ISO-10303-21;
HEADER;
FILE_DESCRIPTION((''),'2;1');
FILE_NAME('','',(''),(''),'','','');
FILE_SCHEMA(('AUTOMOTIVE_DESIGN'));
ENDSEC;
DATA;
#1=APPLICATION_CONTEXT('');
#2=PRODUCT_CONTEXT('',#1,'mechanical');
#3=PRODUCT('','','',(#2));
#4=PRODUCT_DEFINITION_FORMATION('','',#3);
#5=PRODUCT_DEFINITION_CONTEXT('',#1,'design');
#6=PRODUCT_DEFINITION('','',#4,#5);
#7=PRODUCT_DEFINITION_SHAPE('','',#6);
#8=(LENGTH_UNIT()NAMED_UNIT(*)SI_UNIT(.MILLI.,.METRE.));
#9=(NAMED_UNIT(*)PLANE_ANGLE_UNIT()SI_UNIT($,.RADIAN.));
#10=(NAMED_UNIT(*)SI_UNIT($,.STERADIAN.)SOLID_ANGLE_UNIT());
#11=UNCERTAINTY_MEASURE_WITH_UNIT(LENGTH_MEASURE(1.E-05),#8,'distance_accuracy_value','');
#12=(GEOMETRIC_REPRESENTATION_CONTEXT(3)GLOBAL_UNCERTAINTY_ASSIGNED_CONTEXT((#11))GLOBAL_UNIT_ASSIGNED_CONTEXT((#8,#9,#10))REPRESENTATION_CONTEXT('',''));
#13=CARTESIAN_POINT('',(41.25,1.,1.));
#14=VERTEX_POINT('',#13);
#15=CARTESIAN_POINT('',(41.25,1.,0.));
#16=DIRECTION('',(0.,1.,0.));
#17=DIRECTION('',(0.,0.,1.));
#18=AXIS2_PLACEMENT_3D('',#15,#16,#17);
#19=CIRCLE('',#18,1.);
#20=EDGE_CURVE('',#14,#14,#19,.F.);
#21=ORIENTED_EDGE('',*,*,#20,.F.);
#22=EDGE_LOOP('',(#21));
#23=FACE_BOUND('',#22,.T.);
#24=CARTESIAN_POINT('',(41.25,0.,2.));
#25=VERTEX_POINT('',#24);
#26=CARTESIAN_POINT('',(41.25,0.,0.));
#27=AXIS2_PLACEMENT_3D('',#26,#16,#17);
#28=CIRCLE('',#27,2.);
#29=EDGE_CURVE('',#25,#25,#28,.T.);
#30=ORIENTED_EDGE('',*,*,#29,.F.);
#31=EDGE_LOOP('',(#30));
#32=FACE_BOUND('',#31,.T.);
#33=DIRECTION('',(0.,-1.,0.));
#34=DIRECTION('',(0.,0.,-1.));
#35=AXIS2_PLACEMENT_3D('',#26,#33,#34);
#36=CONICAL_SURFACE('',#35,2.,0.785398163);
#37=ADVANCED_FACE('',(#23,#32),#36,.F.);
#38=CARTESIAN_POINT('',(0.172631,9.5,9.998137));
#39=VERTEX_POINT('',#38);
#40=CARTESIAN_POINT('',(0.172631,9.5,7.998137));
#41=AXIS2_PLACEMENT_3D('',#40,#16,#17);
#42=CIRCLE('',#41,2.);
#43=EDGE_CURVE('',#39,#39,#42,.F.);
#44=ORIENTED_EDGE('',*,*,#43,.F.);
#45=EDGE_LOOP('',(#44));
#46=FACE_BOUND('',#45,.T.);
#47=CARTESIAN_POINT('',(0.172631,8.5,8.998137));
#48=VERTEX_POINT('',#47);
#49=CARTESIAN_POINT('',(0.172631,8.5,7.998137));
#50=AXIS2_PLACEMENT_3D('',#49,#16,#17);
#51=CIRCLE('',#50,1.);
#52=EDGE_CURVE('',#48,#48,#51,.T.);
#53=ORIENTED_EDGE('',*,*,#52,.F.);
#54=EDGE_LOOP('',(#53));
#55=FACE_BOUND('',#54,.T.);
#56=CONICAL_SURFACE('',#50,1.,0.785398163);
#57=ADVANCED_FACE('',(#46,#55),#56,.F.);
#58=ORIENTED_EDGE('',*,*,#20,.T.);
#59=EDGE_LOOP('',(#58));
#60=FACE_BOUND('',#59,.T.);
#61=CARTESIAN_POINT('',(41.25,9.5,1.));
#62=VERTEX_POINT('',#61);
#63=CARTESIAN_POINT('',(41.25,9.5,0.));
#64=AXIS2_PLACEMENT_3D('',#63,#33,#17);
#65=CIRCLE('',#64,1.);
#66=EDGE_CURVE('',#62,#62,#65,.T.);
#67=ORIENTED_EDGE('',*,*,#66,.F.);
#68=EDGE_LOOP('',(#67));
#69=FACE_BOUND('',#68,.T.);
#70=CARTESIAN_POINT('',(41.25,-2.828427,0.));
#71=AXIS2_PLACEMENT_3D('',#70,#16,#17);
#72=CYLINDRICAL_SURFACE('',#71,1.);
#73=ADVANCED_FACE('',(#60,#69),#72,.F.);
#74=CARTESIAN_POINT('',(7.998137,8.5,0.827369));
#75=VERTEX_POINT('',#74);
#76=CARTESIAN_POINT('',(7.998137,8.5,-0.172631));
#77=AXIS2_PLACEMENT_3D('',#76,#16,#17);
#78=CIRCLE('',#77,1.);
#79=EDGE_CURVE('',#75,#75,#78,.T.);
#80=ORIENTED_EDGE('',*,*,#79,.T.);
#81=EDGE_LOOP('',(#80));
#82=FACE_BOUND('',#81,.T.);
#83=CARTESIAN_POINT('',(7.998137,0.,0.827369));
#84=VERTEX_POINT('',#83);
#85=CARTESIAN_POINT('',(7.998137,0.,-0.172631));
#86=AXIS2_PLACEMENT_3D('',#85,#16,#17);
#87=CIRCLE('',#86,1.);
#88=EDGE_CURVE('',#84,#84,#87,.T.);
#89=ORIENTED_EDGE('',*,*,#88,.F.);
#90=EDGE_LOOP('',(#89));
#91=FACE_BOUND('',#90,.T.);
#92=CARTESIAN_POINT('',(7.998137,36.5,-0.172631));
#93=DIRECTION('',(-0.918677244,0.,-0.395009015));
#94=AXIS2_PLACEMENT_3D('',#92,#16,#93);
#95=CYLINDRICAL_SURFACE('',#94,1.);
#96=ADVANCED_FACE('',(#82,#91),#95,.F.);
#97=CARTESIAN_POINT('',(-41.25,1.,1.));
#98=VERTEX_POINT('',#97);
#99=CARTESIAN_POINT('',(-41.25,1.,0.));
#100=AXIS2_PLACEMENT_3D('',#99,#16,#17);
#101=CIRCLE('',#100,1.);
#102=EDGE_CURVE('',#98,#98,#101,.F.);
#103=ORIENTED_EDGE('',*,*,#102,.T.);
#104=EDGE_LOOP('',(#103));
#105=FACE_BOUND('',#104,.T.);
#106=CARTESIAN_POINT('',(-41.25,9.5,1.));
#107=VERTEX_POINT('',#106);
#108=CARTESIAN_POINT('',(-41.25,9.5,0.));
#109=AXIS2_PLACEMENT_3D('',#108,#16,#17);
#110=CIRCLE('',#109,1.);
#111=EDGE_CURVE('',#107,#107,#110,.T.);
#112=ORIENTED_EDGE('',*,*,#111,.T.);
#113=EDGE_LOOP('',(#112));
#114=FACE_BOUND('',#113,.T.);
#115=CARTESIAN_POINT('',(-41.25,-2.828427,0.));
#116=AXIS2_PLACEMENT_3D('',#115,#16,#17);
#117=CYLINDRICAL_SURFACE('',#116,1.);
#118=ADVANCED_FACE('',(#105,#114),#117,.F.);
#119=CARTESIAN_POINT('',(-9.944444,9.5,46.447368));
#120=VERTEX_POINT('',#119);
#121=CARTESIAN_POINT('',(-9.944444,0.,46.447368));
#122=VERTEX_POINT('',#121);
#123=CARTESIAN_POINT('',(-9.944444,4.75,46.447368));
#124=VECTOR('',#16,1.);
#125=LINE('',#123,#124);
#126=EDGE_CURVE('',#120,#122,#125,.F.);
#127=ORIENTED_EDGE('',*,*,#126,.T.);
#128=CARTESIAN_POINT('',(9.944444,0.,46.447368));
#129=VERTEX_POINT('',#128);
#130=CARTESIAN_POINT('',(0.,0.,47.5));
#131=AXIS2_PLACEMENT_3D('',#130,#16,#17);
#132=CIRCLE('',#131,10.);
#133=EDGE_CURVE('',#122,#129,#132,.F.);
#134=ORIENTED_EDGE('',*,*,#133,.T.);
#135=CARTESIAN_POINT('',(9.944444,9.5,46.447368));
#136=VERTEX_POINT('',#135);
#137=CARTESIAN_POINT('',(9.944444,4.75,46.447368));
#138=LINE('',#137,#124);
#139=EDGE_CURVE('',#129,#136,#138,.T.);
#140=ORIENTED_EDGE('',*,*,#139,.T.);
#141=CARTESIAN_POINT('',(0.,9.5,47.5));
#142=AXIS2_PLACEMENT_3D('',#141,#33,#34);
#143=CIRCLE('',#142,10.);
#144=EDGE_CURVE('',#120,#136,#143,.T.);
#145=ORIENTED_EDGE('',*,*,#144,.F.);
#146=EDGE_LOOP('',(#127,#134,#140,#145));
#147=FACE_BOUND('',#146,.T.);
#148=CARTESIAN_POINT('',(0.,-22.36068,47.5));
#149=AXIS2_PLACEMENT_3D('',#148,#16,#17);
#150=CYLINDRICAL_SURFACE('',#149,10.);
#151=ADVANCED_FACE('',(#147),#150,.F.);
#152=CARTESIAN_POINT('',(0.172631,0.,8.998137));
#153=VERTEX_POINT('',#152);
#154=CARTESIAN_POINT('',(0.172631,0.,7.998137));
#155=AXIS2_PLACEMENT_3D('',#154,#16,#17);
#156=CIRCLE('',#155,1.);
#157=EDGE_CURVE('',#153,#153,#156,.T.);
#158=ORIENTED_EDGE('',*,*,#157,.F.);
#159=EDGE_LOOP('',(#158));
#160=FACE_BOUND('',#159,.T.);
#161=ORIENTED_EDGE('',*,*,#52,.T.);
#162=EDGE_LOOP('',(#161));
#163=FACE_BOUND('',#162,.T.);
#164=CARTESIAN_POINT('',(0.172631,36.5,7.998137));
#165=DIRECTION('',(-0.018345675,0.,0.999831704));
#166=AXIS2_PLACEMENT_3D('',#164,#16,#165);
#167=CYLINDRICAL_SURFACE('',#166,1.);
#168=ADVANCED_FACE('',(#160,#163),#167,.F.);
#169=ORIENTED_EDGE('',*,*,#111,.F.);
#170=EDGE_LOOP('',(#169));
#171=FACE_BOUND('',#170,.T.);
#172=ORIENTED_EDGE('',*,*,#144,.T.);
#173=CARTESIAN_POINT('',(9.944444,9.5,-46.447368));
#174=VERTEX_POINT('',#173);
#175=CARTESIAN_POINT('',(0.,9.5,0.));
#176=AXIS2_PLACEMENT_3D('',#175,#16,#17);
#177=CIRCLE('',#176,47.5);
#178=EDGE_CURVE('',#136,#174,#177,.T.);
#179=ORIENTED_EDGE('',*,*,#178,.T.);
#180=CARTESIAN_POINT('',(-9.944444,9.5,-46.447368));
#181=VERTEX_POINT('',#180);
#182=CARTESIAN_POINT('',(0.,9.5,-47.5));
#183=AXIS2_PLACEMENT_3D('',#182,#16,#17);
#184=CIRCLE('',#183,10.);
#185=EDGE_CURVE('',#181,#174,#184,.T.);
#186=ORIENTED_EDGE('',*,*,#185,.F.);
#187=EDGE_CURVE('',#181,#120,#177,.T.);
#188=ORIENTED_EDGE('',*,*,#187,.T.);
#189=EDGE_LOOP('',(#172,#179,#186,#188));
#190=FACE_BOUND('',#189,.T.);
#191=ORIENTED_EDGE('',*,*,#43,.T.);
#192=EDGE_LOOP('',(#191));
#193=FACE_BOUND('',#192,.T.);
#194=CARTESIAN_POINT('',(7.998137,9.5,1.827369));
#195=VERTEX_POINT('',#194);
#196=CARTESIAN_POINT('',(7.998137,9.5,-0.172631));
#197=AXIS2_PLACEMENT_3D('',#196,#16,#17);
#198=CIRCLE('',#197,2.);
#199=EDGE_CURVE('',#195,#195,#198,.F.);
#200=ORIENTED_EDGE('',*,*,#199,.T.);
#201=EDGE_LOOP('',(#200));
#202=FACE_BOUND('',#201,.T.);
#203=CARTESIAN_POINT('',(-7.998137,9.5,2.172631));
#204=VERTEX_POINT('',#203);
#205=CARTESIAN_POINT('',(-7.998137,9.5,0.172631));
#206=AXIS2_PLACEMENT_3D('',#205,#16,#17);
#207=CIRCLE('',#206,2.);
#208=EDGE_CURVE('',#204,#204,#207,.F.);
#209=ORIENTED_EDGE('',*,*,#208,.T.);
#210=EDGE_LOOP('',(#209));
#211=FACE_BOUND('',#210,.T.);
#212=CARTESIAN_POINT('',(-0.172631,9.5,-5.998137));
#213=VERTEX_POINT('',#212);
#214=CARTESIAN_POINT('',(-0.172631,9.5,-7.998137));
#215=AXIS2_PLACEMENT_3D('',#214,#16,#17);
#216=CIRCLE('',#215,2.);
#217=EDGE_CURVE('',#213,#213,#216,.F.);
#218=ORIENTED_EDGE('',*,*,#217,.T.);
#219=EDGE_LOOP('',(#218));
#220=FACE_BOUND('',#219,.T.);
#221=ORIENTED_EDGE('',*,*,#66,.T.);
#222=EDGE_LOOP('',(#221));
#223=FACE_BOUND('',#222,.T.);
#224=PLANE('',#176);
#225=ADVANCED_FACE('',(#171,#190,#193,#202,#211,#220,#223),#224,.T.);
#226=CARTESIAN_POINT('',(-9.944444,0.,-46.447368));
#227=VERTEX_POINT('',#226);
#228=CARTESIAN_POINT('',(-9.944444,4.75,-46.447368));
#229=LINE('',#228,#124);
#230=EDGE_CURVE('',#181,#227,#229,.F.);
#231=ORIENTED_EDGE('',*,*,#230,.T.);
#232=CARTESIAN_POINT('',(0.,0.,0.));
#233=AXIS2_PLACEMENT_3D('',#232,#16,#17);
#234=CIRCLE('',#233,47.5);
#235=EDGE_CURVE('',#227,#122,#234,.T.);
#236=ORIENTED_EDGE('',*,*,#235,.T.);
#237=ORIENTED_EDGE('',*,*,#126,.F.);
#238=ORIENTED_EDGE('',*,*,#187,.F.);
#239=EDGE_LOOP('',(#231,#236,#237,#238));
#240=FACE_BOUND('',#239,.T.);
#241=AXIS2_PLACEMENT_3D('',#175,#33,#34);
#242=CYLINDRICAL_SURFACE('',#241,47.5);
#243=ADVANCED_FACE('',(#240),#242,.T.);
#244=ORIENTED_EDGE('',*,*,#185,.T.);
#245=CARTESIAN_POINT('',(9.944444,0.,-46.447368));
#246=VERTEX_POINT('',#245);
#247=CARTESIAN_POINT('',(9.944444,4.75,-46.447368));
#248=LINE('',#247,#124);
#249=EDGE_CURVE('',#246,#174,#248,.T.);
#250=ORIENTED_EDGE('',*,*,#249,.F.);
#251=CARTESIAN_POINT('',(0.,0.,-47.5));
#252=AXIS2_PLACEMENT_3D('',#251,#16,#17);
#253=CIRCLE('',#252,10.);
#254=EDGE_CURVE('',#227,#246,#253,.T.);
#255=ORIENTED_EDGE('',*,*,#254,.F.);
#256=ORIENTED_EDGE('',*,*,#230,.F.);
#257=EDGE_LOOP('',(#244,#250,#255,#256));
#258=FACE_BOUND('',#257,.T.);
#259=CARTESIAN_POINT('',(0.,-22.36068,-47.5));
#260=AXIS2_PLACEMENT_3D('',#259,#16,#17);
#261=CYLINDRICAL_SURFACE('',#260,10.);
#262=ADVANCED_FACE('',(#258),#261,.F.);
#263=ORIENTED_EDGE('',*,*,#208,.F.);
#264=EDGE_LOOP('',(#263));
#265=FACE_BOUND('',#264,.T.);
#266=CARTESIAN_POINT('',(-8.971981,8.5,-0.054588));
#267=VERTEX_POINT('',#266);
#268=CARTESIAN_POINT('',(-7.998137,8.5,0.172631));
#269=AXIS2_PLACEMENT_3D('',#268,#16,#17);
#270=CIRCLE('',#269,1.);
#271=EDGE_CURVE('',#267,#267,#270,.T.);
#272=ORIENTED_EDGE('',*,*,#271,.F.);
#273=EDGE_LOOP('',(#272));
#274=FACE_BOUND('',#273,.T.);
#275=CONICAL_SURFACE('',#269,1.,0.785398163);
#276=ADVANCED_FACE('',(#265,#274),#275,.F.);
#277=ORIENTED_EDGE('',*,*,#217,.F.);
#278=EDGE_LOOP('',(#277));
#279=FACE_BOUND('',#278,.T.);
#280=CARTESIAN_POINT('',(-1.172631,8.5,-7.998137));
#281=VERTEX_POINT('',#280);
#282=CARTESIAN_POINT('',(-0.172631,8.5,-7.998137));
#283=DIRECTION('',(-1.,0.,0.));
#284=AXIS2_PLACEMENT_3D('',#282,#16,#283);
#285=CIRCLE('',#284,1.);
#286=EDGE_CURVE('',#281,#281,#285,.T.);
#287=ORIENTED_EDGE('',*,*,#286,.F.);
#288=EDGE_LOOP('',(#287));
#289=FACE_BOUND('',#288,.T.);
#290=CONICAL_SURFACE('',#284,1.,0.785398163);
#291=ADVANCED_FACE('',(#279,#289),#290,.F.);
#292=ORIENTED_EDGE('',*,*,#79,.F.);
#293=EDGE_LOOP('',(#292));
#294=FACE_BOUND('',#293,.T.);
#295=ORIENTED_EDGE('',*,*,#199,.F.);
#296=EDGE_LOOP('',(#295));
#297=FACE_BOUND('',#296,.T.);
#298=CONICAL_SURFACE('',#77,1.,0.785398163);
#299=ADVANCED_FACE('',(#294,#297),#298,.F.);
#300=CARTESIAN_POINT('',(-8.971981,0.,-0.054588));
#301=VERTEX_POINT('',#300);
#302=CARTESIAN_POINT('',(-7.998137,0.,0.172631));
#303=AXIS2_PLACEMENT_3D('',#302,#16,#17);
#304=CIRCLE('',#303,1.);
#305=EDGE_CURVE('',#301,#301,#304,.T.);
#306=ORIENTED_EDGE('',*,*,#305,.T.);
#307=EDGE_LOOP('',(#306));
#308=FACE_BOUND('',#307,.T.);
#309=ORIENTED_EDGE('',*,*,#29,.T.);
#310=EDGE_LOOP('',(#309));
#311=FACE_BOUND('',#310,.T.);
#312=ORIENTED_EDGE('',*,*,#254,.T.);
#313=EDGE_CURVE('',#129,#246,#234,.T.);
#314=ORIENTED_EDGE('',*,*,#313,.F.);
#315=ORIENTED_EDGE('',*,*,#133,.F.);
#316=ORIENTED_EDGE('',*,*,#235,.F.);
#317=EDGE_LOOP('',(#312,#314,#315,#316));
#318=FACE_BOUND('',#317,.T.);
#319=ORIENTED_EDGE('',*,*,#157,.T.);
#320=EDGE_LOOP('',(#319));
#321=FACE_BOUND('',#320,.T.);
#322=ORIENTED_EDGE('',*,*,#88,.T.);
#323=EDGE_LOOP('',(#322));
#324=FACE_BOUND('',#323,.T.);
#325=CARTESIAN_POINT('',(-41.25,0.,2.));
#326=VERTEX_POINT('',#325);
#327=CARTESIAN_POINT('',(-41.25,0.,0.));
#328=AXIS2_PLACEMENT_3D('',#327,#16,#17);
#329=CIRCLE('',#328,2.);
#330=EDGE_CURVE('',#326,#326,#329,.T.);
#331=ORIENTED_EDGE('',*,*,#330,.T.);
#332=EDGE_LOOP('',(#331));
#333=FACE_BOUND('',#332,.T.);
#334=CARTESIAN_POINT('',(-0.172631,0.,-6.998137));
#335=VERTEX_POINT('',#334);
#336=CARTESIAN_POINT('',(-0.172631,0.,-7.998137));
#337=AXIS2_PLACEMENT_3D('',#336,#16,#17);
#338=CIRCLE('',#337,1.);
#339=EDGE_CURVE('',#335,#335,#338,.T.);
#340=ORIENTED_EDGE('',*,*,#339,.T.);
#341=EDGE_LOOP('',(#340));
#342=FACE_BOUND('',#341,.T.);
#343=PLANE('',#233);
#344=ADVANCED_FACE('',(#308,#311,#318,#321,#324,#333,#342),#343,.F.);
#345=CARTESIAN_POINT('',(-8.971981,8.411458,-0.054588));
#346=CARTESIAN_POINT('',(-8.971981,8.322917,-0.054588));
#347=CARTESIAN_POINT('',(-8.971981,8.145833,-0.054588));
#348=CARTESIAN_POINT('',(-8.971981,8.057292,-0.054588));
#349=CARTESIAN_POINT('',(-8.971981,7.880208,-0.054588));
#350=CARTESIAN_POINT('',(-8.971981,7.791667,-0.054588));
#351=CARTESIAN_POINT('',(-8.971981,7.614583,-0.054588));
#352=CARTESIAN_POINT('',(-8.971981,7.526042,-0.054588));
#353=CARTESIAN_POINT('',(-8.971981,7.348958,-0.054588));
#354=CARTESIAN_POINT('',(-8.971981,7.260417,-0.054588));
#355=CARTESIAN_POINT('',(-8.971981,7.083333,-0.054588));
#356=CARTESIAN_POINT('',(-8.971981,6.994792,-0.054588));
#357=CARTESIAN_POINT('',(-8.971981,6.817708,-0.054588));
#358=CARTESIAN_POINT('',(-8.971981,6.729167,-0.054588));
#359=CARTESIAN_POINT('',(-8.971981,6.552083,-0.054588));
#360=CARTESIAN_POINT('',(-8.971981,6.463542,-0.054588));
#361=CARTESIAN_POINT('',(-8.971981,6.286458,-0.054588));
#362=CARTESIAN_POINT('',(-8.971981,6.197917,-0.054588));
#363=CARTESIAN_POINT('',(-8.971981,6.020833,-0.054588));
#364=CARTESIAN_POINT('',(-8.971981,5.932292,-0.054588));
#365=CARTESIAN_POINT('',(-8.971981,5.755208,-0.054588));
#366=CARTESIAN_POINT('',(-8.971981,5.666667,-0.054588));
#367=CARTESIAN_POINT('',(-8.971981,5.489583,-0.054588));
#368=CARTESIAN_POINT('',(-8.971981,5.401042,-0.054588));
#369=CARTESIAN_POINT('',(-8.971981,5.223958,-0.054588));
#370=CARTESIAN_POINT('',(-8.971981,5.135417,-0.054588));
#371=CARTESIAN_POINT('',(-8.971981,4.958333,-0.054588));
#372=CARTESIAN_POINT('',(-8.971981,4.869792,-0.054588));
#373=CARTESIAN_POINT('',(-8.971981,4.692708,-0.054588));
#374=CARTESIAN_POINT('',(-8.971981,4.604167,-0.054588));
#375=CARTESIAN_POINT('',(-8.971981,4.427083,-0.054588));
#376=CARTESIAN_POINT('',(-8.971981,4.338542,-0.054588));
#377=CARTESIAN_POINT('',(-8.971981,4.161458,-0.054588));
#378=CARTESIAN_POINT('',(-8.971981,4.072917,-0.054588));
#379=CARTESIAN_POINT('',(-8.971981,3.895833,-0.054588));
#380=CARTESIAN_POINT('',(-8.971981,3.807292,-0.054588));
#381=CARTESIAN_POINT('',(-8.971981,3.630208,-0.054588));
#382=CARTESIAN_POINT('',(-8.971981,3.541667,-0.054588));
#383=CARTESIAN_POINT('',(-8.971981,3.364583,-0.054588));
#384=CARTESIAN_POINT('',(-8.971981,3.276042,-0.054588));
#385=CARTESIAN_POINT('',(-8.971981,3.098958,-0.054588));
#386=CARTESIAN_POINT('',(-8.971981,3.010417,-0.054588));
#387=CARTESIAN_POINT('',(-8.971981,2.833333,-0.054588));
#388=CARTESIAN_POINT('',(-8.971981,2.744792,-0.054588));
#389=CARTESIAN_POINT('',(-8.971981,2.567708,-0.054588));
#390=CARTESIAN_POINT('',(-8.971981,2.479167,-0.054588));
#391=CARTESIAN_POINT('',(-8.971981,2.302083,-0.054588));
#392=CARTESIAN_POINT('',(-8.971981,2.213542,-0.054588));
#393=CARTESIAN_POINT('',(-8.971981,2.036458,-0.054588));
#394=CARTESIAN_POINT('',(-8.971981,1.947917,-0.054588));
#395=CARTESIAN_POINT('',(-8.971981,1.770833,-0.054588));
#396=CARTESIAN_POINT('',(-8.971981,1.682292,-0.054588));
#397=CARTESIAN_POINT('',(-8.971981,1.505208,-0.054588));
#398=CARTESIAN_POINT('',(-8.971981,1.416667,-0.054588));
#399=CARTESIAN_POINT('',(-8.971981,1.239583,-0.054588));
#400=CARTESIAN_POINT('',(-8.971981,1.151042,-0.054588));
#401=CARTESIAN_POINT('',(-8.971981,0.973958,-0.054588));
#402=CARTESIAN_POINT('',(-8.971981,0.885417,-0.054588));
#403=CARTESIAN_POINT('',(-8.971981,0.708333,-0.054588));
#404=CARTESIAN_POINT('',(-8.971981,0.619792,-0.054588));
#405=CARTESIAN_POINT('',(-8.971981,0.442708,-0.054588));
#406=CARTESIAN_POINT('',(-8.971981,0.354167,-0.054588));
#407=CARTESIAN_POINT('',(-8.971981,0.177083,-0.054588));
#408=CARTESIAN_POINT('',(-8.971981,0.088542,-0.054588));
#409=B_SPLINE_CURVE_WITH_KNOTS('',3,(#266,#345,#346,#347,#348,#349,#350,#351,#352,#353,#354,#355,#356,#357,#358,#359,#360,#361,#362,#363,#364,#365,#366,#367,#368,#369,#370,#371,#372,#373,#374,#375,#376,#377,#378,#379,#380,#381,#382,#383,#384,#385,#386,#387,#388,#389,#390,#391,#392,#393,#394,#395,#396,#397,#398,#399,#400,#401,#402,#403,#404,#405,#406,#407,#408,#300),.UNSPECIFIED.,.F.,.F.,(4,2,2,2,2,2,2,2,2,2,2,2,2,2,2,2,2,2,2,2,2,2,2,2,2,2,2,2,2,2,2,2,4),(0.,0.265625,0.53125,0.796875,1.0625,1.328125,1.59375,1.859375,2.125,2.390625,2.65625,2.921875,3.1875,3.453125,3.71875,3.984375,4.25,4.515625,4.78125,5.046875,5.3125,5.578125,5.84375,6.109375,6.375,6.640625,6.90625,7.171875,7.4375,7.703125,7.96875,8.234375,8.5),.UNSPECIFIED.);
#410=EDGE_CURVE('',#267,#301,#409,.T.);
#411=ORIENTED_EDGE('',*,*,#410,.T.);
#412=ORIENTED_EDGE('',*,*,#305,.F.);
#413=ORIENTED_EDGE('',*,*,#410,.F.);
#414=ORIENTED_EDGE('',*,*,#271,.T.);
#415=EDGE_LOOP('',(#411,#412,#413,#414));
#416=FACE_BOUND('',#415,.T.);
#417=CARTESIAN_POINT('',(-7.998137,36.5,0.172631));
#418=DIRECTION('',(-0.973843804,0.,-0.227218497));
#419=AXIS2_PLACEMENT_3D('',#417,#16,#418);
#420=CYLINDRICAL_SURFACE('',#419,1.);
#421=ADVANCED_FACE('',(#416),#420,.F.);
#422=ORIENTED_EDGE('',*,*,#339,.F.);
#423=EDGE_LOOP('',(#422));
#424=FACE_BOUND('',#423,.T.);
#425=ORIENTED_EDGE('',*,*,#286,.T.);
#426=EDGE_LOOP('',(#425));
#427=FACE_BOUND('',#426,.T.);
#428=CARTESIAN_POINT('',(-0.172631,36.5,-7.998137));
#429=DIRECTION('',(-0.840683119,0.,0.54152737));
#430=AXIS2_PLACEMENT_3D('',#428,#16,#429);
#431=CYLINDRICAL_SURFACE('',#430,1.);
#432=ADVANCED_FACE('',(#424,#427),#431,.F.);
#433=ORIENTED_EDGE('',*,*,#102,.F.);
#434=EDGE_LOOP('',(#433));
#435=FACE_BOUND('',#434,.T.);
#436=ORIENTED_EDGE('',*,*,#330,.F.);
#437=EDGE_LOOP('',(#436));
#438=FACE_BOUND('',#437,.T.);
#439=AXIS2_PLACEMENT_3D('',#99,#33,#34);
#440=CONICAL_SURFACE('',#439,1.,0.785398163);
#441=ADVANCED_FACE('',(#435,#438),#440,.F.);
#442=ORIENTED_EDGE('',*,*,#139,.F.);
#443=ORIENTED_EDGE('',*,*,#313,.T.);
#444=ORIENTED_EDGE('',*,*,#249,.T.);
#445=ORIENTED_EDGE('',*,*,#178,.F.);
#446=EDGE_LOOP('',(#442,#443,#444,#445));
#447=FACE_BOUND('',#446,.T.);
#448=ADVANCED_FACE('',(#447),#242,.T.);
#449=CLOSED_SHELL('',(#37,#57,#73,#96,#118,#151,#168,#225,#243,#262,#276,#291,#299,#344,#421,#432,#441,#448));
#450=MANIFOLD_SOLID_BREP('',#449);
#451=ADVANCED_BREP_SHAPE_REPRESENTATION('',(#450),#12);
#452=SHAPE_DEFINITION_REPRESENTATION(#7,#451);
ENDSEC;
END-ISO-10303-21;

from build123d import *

# Parameters (mm, degrees)
SKETCH1_R                = 47.5
BOSS_EXTRUDE1_DEPTH      = 9.5
CUT_EXTRUDE1_DEPTH       = 9.5
CAVITY1_OUTLINE_R        = 1
CAVITY1_DEPTH            = 9.5
CHAMFER1_SIZE            = 1
SKETCH3_R                = 1
CUT_EXTRUDE2_DEPTH       = 9.5
CHAMFER2_SIZE            = 1
CHAMFER2_OF_MIRROR2_SIZE = 1


# Read off the part's stored shape, not the designer's step: Cavity1
with BuildPart() as part:
    # Sketch1 → Boss-Extrude1 (new body)
    with BuildSketch(Plane(origin=(0, 0, 0), x_dir=(1, 0, 0), z_dir=(0, 1, 0))):
        with Locations(Location((0, 0, 0), (0, 0, 270))):
            Circle(SKETCH1_R)
    extrude(amount=BOSS_EXTRUDE1_DEPTH)

    # Sketch2 → Cut-Extrude1 (cut)
    with BuildSketch(Plane(origin=(0, 9.5, 0), x_dir=(1, 0, 0), z_dir=(0, 1, 0))):
        with BuildLine():
            Line((-10, 47.5), (10, 47.5))
            ThreePointArc((10, 47.5), (0, 37.5), (-10, 47.5))
        make_face()
    cut_extrude1 = extrude(amount=-CUT_EXTRUDE1_DEPTH, mode=Mode.SUBTRACT)

    # Mirror1: Cut-Extrude1 across plane
    add(cut_extrude1.mirror(Plane.XY), mode=Mode.SUBTRACT)

    # Cavity1 outline → Cavity1 (cut)
    with BuildSketch(Plane(origin=(0, 0, 0), x_dir=(1, 0, 0), z_dir=(0, 1, 0))):
        with Locations((7.9981372, 0.17263061)):
            Circle(CAVITY1_OUTLINE_R)
        with Locations((0.17263061, -7.9981372)):
            Circle(CAVITY1_OUTLINE_R)
        with Locations((-0.17263061, 7.9981372)):
            Circle(CAVITY1_OUTLINE_R)
        with Locations((-7.9981372, -0.17263061)):
            Circle(CAVITY1_OUTLINE_R)
    extrude(amount=CAVITY1_DEPTH, mode=Mode.SUBTRACT)

    # Chamfer1
    chamfer1_edges = [part.edges().sort_by_distance(p)[0] for p in [
        (-8.9981372, 9.5, 0.17263061),
        (-1.17263061, 9.5, -7.9981372),
        (-0.82736939, 9.5, 7.9981372),
        (6.9981372, 9.5, -0.17263061),
    ]]
    chamfer(chamfer1_edges, length=CHAMFER1_SIZE)

    # Sketch3 → Cut-Extrude2 (cut)
    with BuildSketch(Plane(origin=(0, 9.5, 0), x_dir=(1, 0, 0), z_dir=(0, 1, 0))):
        with Locations(Location((-41.25, 0, 0), (0, 0, 270))):
            Circle(SKETCH3_R)
    cut_extrude2 = extrude(amount=-CUT_EXTRUDE2_DEPTH, mode=Mode.SUBTRACT)

    # Chamfer2
    chamfer2_edges = [part.edges().sort_by_distance(p)[0] for p in [
        (-41.25, 0, -1),
    ]]
    chamfer(chamfer2_edges, length=CHAMFER2_SIZE)

    # Mirror2: Cut-Extrude2 across plane
    add(cut_extrude2.mirror(Plane(origin=(0, 0, 0), x_dir=(0, 0, 1), z_dir=(1, 0, 0))), mode=Mode.SUBTRACT)

    # Chamfer2 of Mirror2
    chamfer2_of_mirror2_edges = [part.edges().sort_by_distance(p)[0] for p in [
        (41.25, 0, -1),
    ]]
    chamfer(chamfer2_of_mirror2_edges, length=CHAMFER2_OF_MIRROR2_SIZE)


solid = part.part
